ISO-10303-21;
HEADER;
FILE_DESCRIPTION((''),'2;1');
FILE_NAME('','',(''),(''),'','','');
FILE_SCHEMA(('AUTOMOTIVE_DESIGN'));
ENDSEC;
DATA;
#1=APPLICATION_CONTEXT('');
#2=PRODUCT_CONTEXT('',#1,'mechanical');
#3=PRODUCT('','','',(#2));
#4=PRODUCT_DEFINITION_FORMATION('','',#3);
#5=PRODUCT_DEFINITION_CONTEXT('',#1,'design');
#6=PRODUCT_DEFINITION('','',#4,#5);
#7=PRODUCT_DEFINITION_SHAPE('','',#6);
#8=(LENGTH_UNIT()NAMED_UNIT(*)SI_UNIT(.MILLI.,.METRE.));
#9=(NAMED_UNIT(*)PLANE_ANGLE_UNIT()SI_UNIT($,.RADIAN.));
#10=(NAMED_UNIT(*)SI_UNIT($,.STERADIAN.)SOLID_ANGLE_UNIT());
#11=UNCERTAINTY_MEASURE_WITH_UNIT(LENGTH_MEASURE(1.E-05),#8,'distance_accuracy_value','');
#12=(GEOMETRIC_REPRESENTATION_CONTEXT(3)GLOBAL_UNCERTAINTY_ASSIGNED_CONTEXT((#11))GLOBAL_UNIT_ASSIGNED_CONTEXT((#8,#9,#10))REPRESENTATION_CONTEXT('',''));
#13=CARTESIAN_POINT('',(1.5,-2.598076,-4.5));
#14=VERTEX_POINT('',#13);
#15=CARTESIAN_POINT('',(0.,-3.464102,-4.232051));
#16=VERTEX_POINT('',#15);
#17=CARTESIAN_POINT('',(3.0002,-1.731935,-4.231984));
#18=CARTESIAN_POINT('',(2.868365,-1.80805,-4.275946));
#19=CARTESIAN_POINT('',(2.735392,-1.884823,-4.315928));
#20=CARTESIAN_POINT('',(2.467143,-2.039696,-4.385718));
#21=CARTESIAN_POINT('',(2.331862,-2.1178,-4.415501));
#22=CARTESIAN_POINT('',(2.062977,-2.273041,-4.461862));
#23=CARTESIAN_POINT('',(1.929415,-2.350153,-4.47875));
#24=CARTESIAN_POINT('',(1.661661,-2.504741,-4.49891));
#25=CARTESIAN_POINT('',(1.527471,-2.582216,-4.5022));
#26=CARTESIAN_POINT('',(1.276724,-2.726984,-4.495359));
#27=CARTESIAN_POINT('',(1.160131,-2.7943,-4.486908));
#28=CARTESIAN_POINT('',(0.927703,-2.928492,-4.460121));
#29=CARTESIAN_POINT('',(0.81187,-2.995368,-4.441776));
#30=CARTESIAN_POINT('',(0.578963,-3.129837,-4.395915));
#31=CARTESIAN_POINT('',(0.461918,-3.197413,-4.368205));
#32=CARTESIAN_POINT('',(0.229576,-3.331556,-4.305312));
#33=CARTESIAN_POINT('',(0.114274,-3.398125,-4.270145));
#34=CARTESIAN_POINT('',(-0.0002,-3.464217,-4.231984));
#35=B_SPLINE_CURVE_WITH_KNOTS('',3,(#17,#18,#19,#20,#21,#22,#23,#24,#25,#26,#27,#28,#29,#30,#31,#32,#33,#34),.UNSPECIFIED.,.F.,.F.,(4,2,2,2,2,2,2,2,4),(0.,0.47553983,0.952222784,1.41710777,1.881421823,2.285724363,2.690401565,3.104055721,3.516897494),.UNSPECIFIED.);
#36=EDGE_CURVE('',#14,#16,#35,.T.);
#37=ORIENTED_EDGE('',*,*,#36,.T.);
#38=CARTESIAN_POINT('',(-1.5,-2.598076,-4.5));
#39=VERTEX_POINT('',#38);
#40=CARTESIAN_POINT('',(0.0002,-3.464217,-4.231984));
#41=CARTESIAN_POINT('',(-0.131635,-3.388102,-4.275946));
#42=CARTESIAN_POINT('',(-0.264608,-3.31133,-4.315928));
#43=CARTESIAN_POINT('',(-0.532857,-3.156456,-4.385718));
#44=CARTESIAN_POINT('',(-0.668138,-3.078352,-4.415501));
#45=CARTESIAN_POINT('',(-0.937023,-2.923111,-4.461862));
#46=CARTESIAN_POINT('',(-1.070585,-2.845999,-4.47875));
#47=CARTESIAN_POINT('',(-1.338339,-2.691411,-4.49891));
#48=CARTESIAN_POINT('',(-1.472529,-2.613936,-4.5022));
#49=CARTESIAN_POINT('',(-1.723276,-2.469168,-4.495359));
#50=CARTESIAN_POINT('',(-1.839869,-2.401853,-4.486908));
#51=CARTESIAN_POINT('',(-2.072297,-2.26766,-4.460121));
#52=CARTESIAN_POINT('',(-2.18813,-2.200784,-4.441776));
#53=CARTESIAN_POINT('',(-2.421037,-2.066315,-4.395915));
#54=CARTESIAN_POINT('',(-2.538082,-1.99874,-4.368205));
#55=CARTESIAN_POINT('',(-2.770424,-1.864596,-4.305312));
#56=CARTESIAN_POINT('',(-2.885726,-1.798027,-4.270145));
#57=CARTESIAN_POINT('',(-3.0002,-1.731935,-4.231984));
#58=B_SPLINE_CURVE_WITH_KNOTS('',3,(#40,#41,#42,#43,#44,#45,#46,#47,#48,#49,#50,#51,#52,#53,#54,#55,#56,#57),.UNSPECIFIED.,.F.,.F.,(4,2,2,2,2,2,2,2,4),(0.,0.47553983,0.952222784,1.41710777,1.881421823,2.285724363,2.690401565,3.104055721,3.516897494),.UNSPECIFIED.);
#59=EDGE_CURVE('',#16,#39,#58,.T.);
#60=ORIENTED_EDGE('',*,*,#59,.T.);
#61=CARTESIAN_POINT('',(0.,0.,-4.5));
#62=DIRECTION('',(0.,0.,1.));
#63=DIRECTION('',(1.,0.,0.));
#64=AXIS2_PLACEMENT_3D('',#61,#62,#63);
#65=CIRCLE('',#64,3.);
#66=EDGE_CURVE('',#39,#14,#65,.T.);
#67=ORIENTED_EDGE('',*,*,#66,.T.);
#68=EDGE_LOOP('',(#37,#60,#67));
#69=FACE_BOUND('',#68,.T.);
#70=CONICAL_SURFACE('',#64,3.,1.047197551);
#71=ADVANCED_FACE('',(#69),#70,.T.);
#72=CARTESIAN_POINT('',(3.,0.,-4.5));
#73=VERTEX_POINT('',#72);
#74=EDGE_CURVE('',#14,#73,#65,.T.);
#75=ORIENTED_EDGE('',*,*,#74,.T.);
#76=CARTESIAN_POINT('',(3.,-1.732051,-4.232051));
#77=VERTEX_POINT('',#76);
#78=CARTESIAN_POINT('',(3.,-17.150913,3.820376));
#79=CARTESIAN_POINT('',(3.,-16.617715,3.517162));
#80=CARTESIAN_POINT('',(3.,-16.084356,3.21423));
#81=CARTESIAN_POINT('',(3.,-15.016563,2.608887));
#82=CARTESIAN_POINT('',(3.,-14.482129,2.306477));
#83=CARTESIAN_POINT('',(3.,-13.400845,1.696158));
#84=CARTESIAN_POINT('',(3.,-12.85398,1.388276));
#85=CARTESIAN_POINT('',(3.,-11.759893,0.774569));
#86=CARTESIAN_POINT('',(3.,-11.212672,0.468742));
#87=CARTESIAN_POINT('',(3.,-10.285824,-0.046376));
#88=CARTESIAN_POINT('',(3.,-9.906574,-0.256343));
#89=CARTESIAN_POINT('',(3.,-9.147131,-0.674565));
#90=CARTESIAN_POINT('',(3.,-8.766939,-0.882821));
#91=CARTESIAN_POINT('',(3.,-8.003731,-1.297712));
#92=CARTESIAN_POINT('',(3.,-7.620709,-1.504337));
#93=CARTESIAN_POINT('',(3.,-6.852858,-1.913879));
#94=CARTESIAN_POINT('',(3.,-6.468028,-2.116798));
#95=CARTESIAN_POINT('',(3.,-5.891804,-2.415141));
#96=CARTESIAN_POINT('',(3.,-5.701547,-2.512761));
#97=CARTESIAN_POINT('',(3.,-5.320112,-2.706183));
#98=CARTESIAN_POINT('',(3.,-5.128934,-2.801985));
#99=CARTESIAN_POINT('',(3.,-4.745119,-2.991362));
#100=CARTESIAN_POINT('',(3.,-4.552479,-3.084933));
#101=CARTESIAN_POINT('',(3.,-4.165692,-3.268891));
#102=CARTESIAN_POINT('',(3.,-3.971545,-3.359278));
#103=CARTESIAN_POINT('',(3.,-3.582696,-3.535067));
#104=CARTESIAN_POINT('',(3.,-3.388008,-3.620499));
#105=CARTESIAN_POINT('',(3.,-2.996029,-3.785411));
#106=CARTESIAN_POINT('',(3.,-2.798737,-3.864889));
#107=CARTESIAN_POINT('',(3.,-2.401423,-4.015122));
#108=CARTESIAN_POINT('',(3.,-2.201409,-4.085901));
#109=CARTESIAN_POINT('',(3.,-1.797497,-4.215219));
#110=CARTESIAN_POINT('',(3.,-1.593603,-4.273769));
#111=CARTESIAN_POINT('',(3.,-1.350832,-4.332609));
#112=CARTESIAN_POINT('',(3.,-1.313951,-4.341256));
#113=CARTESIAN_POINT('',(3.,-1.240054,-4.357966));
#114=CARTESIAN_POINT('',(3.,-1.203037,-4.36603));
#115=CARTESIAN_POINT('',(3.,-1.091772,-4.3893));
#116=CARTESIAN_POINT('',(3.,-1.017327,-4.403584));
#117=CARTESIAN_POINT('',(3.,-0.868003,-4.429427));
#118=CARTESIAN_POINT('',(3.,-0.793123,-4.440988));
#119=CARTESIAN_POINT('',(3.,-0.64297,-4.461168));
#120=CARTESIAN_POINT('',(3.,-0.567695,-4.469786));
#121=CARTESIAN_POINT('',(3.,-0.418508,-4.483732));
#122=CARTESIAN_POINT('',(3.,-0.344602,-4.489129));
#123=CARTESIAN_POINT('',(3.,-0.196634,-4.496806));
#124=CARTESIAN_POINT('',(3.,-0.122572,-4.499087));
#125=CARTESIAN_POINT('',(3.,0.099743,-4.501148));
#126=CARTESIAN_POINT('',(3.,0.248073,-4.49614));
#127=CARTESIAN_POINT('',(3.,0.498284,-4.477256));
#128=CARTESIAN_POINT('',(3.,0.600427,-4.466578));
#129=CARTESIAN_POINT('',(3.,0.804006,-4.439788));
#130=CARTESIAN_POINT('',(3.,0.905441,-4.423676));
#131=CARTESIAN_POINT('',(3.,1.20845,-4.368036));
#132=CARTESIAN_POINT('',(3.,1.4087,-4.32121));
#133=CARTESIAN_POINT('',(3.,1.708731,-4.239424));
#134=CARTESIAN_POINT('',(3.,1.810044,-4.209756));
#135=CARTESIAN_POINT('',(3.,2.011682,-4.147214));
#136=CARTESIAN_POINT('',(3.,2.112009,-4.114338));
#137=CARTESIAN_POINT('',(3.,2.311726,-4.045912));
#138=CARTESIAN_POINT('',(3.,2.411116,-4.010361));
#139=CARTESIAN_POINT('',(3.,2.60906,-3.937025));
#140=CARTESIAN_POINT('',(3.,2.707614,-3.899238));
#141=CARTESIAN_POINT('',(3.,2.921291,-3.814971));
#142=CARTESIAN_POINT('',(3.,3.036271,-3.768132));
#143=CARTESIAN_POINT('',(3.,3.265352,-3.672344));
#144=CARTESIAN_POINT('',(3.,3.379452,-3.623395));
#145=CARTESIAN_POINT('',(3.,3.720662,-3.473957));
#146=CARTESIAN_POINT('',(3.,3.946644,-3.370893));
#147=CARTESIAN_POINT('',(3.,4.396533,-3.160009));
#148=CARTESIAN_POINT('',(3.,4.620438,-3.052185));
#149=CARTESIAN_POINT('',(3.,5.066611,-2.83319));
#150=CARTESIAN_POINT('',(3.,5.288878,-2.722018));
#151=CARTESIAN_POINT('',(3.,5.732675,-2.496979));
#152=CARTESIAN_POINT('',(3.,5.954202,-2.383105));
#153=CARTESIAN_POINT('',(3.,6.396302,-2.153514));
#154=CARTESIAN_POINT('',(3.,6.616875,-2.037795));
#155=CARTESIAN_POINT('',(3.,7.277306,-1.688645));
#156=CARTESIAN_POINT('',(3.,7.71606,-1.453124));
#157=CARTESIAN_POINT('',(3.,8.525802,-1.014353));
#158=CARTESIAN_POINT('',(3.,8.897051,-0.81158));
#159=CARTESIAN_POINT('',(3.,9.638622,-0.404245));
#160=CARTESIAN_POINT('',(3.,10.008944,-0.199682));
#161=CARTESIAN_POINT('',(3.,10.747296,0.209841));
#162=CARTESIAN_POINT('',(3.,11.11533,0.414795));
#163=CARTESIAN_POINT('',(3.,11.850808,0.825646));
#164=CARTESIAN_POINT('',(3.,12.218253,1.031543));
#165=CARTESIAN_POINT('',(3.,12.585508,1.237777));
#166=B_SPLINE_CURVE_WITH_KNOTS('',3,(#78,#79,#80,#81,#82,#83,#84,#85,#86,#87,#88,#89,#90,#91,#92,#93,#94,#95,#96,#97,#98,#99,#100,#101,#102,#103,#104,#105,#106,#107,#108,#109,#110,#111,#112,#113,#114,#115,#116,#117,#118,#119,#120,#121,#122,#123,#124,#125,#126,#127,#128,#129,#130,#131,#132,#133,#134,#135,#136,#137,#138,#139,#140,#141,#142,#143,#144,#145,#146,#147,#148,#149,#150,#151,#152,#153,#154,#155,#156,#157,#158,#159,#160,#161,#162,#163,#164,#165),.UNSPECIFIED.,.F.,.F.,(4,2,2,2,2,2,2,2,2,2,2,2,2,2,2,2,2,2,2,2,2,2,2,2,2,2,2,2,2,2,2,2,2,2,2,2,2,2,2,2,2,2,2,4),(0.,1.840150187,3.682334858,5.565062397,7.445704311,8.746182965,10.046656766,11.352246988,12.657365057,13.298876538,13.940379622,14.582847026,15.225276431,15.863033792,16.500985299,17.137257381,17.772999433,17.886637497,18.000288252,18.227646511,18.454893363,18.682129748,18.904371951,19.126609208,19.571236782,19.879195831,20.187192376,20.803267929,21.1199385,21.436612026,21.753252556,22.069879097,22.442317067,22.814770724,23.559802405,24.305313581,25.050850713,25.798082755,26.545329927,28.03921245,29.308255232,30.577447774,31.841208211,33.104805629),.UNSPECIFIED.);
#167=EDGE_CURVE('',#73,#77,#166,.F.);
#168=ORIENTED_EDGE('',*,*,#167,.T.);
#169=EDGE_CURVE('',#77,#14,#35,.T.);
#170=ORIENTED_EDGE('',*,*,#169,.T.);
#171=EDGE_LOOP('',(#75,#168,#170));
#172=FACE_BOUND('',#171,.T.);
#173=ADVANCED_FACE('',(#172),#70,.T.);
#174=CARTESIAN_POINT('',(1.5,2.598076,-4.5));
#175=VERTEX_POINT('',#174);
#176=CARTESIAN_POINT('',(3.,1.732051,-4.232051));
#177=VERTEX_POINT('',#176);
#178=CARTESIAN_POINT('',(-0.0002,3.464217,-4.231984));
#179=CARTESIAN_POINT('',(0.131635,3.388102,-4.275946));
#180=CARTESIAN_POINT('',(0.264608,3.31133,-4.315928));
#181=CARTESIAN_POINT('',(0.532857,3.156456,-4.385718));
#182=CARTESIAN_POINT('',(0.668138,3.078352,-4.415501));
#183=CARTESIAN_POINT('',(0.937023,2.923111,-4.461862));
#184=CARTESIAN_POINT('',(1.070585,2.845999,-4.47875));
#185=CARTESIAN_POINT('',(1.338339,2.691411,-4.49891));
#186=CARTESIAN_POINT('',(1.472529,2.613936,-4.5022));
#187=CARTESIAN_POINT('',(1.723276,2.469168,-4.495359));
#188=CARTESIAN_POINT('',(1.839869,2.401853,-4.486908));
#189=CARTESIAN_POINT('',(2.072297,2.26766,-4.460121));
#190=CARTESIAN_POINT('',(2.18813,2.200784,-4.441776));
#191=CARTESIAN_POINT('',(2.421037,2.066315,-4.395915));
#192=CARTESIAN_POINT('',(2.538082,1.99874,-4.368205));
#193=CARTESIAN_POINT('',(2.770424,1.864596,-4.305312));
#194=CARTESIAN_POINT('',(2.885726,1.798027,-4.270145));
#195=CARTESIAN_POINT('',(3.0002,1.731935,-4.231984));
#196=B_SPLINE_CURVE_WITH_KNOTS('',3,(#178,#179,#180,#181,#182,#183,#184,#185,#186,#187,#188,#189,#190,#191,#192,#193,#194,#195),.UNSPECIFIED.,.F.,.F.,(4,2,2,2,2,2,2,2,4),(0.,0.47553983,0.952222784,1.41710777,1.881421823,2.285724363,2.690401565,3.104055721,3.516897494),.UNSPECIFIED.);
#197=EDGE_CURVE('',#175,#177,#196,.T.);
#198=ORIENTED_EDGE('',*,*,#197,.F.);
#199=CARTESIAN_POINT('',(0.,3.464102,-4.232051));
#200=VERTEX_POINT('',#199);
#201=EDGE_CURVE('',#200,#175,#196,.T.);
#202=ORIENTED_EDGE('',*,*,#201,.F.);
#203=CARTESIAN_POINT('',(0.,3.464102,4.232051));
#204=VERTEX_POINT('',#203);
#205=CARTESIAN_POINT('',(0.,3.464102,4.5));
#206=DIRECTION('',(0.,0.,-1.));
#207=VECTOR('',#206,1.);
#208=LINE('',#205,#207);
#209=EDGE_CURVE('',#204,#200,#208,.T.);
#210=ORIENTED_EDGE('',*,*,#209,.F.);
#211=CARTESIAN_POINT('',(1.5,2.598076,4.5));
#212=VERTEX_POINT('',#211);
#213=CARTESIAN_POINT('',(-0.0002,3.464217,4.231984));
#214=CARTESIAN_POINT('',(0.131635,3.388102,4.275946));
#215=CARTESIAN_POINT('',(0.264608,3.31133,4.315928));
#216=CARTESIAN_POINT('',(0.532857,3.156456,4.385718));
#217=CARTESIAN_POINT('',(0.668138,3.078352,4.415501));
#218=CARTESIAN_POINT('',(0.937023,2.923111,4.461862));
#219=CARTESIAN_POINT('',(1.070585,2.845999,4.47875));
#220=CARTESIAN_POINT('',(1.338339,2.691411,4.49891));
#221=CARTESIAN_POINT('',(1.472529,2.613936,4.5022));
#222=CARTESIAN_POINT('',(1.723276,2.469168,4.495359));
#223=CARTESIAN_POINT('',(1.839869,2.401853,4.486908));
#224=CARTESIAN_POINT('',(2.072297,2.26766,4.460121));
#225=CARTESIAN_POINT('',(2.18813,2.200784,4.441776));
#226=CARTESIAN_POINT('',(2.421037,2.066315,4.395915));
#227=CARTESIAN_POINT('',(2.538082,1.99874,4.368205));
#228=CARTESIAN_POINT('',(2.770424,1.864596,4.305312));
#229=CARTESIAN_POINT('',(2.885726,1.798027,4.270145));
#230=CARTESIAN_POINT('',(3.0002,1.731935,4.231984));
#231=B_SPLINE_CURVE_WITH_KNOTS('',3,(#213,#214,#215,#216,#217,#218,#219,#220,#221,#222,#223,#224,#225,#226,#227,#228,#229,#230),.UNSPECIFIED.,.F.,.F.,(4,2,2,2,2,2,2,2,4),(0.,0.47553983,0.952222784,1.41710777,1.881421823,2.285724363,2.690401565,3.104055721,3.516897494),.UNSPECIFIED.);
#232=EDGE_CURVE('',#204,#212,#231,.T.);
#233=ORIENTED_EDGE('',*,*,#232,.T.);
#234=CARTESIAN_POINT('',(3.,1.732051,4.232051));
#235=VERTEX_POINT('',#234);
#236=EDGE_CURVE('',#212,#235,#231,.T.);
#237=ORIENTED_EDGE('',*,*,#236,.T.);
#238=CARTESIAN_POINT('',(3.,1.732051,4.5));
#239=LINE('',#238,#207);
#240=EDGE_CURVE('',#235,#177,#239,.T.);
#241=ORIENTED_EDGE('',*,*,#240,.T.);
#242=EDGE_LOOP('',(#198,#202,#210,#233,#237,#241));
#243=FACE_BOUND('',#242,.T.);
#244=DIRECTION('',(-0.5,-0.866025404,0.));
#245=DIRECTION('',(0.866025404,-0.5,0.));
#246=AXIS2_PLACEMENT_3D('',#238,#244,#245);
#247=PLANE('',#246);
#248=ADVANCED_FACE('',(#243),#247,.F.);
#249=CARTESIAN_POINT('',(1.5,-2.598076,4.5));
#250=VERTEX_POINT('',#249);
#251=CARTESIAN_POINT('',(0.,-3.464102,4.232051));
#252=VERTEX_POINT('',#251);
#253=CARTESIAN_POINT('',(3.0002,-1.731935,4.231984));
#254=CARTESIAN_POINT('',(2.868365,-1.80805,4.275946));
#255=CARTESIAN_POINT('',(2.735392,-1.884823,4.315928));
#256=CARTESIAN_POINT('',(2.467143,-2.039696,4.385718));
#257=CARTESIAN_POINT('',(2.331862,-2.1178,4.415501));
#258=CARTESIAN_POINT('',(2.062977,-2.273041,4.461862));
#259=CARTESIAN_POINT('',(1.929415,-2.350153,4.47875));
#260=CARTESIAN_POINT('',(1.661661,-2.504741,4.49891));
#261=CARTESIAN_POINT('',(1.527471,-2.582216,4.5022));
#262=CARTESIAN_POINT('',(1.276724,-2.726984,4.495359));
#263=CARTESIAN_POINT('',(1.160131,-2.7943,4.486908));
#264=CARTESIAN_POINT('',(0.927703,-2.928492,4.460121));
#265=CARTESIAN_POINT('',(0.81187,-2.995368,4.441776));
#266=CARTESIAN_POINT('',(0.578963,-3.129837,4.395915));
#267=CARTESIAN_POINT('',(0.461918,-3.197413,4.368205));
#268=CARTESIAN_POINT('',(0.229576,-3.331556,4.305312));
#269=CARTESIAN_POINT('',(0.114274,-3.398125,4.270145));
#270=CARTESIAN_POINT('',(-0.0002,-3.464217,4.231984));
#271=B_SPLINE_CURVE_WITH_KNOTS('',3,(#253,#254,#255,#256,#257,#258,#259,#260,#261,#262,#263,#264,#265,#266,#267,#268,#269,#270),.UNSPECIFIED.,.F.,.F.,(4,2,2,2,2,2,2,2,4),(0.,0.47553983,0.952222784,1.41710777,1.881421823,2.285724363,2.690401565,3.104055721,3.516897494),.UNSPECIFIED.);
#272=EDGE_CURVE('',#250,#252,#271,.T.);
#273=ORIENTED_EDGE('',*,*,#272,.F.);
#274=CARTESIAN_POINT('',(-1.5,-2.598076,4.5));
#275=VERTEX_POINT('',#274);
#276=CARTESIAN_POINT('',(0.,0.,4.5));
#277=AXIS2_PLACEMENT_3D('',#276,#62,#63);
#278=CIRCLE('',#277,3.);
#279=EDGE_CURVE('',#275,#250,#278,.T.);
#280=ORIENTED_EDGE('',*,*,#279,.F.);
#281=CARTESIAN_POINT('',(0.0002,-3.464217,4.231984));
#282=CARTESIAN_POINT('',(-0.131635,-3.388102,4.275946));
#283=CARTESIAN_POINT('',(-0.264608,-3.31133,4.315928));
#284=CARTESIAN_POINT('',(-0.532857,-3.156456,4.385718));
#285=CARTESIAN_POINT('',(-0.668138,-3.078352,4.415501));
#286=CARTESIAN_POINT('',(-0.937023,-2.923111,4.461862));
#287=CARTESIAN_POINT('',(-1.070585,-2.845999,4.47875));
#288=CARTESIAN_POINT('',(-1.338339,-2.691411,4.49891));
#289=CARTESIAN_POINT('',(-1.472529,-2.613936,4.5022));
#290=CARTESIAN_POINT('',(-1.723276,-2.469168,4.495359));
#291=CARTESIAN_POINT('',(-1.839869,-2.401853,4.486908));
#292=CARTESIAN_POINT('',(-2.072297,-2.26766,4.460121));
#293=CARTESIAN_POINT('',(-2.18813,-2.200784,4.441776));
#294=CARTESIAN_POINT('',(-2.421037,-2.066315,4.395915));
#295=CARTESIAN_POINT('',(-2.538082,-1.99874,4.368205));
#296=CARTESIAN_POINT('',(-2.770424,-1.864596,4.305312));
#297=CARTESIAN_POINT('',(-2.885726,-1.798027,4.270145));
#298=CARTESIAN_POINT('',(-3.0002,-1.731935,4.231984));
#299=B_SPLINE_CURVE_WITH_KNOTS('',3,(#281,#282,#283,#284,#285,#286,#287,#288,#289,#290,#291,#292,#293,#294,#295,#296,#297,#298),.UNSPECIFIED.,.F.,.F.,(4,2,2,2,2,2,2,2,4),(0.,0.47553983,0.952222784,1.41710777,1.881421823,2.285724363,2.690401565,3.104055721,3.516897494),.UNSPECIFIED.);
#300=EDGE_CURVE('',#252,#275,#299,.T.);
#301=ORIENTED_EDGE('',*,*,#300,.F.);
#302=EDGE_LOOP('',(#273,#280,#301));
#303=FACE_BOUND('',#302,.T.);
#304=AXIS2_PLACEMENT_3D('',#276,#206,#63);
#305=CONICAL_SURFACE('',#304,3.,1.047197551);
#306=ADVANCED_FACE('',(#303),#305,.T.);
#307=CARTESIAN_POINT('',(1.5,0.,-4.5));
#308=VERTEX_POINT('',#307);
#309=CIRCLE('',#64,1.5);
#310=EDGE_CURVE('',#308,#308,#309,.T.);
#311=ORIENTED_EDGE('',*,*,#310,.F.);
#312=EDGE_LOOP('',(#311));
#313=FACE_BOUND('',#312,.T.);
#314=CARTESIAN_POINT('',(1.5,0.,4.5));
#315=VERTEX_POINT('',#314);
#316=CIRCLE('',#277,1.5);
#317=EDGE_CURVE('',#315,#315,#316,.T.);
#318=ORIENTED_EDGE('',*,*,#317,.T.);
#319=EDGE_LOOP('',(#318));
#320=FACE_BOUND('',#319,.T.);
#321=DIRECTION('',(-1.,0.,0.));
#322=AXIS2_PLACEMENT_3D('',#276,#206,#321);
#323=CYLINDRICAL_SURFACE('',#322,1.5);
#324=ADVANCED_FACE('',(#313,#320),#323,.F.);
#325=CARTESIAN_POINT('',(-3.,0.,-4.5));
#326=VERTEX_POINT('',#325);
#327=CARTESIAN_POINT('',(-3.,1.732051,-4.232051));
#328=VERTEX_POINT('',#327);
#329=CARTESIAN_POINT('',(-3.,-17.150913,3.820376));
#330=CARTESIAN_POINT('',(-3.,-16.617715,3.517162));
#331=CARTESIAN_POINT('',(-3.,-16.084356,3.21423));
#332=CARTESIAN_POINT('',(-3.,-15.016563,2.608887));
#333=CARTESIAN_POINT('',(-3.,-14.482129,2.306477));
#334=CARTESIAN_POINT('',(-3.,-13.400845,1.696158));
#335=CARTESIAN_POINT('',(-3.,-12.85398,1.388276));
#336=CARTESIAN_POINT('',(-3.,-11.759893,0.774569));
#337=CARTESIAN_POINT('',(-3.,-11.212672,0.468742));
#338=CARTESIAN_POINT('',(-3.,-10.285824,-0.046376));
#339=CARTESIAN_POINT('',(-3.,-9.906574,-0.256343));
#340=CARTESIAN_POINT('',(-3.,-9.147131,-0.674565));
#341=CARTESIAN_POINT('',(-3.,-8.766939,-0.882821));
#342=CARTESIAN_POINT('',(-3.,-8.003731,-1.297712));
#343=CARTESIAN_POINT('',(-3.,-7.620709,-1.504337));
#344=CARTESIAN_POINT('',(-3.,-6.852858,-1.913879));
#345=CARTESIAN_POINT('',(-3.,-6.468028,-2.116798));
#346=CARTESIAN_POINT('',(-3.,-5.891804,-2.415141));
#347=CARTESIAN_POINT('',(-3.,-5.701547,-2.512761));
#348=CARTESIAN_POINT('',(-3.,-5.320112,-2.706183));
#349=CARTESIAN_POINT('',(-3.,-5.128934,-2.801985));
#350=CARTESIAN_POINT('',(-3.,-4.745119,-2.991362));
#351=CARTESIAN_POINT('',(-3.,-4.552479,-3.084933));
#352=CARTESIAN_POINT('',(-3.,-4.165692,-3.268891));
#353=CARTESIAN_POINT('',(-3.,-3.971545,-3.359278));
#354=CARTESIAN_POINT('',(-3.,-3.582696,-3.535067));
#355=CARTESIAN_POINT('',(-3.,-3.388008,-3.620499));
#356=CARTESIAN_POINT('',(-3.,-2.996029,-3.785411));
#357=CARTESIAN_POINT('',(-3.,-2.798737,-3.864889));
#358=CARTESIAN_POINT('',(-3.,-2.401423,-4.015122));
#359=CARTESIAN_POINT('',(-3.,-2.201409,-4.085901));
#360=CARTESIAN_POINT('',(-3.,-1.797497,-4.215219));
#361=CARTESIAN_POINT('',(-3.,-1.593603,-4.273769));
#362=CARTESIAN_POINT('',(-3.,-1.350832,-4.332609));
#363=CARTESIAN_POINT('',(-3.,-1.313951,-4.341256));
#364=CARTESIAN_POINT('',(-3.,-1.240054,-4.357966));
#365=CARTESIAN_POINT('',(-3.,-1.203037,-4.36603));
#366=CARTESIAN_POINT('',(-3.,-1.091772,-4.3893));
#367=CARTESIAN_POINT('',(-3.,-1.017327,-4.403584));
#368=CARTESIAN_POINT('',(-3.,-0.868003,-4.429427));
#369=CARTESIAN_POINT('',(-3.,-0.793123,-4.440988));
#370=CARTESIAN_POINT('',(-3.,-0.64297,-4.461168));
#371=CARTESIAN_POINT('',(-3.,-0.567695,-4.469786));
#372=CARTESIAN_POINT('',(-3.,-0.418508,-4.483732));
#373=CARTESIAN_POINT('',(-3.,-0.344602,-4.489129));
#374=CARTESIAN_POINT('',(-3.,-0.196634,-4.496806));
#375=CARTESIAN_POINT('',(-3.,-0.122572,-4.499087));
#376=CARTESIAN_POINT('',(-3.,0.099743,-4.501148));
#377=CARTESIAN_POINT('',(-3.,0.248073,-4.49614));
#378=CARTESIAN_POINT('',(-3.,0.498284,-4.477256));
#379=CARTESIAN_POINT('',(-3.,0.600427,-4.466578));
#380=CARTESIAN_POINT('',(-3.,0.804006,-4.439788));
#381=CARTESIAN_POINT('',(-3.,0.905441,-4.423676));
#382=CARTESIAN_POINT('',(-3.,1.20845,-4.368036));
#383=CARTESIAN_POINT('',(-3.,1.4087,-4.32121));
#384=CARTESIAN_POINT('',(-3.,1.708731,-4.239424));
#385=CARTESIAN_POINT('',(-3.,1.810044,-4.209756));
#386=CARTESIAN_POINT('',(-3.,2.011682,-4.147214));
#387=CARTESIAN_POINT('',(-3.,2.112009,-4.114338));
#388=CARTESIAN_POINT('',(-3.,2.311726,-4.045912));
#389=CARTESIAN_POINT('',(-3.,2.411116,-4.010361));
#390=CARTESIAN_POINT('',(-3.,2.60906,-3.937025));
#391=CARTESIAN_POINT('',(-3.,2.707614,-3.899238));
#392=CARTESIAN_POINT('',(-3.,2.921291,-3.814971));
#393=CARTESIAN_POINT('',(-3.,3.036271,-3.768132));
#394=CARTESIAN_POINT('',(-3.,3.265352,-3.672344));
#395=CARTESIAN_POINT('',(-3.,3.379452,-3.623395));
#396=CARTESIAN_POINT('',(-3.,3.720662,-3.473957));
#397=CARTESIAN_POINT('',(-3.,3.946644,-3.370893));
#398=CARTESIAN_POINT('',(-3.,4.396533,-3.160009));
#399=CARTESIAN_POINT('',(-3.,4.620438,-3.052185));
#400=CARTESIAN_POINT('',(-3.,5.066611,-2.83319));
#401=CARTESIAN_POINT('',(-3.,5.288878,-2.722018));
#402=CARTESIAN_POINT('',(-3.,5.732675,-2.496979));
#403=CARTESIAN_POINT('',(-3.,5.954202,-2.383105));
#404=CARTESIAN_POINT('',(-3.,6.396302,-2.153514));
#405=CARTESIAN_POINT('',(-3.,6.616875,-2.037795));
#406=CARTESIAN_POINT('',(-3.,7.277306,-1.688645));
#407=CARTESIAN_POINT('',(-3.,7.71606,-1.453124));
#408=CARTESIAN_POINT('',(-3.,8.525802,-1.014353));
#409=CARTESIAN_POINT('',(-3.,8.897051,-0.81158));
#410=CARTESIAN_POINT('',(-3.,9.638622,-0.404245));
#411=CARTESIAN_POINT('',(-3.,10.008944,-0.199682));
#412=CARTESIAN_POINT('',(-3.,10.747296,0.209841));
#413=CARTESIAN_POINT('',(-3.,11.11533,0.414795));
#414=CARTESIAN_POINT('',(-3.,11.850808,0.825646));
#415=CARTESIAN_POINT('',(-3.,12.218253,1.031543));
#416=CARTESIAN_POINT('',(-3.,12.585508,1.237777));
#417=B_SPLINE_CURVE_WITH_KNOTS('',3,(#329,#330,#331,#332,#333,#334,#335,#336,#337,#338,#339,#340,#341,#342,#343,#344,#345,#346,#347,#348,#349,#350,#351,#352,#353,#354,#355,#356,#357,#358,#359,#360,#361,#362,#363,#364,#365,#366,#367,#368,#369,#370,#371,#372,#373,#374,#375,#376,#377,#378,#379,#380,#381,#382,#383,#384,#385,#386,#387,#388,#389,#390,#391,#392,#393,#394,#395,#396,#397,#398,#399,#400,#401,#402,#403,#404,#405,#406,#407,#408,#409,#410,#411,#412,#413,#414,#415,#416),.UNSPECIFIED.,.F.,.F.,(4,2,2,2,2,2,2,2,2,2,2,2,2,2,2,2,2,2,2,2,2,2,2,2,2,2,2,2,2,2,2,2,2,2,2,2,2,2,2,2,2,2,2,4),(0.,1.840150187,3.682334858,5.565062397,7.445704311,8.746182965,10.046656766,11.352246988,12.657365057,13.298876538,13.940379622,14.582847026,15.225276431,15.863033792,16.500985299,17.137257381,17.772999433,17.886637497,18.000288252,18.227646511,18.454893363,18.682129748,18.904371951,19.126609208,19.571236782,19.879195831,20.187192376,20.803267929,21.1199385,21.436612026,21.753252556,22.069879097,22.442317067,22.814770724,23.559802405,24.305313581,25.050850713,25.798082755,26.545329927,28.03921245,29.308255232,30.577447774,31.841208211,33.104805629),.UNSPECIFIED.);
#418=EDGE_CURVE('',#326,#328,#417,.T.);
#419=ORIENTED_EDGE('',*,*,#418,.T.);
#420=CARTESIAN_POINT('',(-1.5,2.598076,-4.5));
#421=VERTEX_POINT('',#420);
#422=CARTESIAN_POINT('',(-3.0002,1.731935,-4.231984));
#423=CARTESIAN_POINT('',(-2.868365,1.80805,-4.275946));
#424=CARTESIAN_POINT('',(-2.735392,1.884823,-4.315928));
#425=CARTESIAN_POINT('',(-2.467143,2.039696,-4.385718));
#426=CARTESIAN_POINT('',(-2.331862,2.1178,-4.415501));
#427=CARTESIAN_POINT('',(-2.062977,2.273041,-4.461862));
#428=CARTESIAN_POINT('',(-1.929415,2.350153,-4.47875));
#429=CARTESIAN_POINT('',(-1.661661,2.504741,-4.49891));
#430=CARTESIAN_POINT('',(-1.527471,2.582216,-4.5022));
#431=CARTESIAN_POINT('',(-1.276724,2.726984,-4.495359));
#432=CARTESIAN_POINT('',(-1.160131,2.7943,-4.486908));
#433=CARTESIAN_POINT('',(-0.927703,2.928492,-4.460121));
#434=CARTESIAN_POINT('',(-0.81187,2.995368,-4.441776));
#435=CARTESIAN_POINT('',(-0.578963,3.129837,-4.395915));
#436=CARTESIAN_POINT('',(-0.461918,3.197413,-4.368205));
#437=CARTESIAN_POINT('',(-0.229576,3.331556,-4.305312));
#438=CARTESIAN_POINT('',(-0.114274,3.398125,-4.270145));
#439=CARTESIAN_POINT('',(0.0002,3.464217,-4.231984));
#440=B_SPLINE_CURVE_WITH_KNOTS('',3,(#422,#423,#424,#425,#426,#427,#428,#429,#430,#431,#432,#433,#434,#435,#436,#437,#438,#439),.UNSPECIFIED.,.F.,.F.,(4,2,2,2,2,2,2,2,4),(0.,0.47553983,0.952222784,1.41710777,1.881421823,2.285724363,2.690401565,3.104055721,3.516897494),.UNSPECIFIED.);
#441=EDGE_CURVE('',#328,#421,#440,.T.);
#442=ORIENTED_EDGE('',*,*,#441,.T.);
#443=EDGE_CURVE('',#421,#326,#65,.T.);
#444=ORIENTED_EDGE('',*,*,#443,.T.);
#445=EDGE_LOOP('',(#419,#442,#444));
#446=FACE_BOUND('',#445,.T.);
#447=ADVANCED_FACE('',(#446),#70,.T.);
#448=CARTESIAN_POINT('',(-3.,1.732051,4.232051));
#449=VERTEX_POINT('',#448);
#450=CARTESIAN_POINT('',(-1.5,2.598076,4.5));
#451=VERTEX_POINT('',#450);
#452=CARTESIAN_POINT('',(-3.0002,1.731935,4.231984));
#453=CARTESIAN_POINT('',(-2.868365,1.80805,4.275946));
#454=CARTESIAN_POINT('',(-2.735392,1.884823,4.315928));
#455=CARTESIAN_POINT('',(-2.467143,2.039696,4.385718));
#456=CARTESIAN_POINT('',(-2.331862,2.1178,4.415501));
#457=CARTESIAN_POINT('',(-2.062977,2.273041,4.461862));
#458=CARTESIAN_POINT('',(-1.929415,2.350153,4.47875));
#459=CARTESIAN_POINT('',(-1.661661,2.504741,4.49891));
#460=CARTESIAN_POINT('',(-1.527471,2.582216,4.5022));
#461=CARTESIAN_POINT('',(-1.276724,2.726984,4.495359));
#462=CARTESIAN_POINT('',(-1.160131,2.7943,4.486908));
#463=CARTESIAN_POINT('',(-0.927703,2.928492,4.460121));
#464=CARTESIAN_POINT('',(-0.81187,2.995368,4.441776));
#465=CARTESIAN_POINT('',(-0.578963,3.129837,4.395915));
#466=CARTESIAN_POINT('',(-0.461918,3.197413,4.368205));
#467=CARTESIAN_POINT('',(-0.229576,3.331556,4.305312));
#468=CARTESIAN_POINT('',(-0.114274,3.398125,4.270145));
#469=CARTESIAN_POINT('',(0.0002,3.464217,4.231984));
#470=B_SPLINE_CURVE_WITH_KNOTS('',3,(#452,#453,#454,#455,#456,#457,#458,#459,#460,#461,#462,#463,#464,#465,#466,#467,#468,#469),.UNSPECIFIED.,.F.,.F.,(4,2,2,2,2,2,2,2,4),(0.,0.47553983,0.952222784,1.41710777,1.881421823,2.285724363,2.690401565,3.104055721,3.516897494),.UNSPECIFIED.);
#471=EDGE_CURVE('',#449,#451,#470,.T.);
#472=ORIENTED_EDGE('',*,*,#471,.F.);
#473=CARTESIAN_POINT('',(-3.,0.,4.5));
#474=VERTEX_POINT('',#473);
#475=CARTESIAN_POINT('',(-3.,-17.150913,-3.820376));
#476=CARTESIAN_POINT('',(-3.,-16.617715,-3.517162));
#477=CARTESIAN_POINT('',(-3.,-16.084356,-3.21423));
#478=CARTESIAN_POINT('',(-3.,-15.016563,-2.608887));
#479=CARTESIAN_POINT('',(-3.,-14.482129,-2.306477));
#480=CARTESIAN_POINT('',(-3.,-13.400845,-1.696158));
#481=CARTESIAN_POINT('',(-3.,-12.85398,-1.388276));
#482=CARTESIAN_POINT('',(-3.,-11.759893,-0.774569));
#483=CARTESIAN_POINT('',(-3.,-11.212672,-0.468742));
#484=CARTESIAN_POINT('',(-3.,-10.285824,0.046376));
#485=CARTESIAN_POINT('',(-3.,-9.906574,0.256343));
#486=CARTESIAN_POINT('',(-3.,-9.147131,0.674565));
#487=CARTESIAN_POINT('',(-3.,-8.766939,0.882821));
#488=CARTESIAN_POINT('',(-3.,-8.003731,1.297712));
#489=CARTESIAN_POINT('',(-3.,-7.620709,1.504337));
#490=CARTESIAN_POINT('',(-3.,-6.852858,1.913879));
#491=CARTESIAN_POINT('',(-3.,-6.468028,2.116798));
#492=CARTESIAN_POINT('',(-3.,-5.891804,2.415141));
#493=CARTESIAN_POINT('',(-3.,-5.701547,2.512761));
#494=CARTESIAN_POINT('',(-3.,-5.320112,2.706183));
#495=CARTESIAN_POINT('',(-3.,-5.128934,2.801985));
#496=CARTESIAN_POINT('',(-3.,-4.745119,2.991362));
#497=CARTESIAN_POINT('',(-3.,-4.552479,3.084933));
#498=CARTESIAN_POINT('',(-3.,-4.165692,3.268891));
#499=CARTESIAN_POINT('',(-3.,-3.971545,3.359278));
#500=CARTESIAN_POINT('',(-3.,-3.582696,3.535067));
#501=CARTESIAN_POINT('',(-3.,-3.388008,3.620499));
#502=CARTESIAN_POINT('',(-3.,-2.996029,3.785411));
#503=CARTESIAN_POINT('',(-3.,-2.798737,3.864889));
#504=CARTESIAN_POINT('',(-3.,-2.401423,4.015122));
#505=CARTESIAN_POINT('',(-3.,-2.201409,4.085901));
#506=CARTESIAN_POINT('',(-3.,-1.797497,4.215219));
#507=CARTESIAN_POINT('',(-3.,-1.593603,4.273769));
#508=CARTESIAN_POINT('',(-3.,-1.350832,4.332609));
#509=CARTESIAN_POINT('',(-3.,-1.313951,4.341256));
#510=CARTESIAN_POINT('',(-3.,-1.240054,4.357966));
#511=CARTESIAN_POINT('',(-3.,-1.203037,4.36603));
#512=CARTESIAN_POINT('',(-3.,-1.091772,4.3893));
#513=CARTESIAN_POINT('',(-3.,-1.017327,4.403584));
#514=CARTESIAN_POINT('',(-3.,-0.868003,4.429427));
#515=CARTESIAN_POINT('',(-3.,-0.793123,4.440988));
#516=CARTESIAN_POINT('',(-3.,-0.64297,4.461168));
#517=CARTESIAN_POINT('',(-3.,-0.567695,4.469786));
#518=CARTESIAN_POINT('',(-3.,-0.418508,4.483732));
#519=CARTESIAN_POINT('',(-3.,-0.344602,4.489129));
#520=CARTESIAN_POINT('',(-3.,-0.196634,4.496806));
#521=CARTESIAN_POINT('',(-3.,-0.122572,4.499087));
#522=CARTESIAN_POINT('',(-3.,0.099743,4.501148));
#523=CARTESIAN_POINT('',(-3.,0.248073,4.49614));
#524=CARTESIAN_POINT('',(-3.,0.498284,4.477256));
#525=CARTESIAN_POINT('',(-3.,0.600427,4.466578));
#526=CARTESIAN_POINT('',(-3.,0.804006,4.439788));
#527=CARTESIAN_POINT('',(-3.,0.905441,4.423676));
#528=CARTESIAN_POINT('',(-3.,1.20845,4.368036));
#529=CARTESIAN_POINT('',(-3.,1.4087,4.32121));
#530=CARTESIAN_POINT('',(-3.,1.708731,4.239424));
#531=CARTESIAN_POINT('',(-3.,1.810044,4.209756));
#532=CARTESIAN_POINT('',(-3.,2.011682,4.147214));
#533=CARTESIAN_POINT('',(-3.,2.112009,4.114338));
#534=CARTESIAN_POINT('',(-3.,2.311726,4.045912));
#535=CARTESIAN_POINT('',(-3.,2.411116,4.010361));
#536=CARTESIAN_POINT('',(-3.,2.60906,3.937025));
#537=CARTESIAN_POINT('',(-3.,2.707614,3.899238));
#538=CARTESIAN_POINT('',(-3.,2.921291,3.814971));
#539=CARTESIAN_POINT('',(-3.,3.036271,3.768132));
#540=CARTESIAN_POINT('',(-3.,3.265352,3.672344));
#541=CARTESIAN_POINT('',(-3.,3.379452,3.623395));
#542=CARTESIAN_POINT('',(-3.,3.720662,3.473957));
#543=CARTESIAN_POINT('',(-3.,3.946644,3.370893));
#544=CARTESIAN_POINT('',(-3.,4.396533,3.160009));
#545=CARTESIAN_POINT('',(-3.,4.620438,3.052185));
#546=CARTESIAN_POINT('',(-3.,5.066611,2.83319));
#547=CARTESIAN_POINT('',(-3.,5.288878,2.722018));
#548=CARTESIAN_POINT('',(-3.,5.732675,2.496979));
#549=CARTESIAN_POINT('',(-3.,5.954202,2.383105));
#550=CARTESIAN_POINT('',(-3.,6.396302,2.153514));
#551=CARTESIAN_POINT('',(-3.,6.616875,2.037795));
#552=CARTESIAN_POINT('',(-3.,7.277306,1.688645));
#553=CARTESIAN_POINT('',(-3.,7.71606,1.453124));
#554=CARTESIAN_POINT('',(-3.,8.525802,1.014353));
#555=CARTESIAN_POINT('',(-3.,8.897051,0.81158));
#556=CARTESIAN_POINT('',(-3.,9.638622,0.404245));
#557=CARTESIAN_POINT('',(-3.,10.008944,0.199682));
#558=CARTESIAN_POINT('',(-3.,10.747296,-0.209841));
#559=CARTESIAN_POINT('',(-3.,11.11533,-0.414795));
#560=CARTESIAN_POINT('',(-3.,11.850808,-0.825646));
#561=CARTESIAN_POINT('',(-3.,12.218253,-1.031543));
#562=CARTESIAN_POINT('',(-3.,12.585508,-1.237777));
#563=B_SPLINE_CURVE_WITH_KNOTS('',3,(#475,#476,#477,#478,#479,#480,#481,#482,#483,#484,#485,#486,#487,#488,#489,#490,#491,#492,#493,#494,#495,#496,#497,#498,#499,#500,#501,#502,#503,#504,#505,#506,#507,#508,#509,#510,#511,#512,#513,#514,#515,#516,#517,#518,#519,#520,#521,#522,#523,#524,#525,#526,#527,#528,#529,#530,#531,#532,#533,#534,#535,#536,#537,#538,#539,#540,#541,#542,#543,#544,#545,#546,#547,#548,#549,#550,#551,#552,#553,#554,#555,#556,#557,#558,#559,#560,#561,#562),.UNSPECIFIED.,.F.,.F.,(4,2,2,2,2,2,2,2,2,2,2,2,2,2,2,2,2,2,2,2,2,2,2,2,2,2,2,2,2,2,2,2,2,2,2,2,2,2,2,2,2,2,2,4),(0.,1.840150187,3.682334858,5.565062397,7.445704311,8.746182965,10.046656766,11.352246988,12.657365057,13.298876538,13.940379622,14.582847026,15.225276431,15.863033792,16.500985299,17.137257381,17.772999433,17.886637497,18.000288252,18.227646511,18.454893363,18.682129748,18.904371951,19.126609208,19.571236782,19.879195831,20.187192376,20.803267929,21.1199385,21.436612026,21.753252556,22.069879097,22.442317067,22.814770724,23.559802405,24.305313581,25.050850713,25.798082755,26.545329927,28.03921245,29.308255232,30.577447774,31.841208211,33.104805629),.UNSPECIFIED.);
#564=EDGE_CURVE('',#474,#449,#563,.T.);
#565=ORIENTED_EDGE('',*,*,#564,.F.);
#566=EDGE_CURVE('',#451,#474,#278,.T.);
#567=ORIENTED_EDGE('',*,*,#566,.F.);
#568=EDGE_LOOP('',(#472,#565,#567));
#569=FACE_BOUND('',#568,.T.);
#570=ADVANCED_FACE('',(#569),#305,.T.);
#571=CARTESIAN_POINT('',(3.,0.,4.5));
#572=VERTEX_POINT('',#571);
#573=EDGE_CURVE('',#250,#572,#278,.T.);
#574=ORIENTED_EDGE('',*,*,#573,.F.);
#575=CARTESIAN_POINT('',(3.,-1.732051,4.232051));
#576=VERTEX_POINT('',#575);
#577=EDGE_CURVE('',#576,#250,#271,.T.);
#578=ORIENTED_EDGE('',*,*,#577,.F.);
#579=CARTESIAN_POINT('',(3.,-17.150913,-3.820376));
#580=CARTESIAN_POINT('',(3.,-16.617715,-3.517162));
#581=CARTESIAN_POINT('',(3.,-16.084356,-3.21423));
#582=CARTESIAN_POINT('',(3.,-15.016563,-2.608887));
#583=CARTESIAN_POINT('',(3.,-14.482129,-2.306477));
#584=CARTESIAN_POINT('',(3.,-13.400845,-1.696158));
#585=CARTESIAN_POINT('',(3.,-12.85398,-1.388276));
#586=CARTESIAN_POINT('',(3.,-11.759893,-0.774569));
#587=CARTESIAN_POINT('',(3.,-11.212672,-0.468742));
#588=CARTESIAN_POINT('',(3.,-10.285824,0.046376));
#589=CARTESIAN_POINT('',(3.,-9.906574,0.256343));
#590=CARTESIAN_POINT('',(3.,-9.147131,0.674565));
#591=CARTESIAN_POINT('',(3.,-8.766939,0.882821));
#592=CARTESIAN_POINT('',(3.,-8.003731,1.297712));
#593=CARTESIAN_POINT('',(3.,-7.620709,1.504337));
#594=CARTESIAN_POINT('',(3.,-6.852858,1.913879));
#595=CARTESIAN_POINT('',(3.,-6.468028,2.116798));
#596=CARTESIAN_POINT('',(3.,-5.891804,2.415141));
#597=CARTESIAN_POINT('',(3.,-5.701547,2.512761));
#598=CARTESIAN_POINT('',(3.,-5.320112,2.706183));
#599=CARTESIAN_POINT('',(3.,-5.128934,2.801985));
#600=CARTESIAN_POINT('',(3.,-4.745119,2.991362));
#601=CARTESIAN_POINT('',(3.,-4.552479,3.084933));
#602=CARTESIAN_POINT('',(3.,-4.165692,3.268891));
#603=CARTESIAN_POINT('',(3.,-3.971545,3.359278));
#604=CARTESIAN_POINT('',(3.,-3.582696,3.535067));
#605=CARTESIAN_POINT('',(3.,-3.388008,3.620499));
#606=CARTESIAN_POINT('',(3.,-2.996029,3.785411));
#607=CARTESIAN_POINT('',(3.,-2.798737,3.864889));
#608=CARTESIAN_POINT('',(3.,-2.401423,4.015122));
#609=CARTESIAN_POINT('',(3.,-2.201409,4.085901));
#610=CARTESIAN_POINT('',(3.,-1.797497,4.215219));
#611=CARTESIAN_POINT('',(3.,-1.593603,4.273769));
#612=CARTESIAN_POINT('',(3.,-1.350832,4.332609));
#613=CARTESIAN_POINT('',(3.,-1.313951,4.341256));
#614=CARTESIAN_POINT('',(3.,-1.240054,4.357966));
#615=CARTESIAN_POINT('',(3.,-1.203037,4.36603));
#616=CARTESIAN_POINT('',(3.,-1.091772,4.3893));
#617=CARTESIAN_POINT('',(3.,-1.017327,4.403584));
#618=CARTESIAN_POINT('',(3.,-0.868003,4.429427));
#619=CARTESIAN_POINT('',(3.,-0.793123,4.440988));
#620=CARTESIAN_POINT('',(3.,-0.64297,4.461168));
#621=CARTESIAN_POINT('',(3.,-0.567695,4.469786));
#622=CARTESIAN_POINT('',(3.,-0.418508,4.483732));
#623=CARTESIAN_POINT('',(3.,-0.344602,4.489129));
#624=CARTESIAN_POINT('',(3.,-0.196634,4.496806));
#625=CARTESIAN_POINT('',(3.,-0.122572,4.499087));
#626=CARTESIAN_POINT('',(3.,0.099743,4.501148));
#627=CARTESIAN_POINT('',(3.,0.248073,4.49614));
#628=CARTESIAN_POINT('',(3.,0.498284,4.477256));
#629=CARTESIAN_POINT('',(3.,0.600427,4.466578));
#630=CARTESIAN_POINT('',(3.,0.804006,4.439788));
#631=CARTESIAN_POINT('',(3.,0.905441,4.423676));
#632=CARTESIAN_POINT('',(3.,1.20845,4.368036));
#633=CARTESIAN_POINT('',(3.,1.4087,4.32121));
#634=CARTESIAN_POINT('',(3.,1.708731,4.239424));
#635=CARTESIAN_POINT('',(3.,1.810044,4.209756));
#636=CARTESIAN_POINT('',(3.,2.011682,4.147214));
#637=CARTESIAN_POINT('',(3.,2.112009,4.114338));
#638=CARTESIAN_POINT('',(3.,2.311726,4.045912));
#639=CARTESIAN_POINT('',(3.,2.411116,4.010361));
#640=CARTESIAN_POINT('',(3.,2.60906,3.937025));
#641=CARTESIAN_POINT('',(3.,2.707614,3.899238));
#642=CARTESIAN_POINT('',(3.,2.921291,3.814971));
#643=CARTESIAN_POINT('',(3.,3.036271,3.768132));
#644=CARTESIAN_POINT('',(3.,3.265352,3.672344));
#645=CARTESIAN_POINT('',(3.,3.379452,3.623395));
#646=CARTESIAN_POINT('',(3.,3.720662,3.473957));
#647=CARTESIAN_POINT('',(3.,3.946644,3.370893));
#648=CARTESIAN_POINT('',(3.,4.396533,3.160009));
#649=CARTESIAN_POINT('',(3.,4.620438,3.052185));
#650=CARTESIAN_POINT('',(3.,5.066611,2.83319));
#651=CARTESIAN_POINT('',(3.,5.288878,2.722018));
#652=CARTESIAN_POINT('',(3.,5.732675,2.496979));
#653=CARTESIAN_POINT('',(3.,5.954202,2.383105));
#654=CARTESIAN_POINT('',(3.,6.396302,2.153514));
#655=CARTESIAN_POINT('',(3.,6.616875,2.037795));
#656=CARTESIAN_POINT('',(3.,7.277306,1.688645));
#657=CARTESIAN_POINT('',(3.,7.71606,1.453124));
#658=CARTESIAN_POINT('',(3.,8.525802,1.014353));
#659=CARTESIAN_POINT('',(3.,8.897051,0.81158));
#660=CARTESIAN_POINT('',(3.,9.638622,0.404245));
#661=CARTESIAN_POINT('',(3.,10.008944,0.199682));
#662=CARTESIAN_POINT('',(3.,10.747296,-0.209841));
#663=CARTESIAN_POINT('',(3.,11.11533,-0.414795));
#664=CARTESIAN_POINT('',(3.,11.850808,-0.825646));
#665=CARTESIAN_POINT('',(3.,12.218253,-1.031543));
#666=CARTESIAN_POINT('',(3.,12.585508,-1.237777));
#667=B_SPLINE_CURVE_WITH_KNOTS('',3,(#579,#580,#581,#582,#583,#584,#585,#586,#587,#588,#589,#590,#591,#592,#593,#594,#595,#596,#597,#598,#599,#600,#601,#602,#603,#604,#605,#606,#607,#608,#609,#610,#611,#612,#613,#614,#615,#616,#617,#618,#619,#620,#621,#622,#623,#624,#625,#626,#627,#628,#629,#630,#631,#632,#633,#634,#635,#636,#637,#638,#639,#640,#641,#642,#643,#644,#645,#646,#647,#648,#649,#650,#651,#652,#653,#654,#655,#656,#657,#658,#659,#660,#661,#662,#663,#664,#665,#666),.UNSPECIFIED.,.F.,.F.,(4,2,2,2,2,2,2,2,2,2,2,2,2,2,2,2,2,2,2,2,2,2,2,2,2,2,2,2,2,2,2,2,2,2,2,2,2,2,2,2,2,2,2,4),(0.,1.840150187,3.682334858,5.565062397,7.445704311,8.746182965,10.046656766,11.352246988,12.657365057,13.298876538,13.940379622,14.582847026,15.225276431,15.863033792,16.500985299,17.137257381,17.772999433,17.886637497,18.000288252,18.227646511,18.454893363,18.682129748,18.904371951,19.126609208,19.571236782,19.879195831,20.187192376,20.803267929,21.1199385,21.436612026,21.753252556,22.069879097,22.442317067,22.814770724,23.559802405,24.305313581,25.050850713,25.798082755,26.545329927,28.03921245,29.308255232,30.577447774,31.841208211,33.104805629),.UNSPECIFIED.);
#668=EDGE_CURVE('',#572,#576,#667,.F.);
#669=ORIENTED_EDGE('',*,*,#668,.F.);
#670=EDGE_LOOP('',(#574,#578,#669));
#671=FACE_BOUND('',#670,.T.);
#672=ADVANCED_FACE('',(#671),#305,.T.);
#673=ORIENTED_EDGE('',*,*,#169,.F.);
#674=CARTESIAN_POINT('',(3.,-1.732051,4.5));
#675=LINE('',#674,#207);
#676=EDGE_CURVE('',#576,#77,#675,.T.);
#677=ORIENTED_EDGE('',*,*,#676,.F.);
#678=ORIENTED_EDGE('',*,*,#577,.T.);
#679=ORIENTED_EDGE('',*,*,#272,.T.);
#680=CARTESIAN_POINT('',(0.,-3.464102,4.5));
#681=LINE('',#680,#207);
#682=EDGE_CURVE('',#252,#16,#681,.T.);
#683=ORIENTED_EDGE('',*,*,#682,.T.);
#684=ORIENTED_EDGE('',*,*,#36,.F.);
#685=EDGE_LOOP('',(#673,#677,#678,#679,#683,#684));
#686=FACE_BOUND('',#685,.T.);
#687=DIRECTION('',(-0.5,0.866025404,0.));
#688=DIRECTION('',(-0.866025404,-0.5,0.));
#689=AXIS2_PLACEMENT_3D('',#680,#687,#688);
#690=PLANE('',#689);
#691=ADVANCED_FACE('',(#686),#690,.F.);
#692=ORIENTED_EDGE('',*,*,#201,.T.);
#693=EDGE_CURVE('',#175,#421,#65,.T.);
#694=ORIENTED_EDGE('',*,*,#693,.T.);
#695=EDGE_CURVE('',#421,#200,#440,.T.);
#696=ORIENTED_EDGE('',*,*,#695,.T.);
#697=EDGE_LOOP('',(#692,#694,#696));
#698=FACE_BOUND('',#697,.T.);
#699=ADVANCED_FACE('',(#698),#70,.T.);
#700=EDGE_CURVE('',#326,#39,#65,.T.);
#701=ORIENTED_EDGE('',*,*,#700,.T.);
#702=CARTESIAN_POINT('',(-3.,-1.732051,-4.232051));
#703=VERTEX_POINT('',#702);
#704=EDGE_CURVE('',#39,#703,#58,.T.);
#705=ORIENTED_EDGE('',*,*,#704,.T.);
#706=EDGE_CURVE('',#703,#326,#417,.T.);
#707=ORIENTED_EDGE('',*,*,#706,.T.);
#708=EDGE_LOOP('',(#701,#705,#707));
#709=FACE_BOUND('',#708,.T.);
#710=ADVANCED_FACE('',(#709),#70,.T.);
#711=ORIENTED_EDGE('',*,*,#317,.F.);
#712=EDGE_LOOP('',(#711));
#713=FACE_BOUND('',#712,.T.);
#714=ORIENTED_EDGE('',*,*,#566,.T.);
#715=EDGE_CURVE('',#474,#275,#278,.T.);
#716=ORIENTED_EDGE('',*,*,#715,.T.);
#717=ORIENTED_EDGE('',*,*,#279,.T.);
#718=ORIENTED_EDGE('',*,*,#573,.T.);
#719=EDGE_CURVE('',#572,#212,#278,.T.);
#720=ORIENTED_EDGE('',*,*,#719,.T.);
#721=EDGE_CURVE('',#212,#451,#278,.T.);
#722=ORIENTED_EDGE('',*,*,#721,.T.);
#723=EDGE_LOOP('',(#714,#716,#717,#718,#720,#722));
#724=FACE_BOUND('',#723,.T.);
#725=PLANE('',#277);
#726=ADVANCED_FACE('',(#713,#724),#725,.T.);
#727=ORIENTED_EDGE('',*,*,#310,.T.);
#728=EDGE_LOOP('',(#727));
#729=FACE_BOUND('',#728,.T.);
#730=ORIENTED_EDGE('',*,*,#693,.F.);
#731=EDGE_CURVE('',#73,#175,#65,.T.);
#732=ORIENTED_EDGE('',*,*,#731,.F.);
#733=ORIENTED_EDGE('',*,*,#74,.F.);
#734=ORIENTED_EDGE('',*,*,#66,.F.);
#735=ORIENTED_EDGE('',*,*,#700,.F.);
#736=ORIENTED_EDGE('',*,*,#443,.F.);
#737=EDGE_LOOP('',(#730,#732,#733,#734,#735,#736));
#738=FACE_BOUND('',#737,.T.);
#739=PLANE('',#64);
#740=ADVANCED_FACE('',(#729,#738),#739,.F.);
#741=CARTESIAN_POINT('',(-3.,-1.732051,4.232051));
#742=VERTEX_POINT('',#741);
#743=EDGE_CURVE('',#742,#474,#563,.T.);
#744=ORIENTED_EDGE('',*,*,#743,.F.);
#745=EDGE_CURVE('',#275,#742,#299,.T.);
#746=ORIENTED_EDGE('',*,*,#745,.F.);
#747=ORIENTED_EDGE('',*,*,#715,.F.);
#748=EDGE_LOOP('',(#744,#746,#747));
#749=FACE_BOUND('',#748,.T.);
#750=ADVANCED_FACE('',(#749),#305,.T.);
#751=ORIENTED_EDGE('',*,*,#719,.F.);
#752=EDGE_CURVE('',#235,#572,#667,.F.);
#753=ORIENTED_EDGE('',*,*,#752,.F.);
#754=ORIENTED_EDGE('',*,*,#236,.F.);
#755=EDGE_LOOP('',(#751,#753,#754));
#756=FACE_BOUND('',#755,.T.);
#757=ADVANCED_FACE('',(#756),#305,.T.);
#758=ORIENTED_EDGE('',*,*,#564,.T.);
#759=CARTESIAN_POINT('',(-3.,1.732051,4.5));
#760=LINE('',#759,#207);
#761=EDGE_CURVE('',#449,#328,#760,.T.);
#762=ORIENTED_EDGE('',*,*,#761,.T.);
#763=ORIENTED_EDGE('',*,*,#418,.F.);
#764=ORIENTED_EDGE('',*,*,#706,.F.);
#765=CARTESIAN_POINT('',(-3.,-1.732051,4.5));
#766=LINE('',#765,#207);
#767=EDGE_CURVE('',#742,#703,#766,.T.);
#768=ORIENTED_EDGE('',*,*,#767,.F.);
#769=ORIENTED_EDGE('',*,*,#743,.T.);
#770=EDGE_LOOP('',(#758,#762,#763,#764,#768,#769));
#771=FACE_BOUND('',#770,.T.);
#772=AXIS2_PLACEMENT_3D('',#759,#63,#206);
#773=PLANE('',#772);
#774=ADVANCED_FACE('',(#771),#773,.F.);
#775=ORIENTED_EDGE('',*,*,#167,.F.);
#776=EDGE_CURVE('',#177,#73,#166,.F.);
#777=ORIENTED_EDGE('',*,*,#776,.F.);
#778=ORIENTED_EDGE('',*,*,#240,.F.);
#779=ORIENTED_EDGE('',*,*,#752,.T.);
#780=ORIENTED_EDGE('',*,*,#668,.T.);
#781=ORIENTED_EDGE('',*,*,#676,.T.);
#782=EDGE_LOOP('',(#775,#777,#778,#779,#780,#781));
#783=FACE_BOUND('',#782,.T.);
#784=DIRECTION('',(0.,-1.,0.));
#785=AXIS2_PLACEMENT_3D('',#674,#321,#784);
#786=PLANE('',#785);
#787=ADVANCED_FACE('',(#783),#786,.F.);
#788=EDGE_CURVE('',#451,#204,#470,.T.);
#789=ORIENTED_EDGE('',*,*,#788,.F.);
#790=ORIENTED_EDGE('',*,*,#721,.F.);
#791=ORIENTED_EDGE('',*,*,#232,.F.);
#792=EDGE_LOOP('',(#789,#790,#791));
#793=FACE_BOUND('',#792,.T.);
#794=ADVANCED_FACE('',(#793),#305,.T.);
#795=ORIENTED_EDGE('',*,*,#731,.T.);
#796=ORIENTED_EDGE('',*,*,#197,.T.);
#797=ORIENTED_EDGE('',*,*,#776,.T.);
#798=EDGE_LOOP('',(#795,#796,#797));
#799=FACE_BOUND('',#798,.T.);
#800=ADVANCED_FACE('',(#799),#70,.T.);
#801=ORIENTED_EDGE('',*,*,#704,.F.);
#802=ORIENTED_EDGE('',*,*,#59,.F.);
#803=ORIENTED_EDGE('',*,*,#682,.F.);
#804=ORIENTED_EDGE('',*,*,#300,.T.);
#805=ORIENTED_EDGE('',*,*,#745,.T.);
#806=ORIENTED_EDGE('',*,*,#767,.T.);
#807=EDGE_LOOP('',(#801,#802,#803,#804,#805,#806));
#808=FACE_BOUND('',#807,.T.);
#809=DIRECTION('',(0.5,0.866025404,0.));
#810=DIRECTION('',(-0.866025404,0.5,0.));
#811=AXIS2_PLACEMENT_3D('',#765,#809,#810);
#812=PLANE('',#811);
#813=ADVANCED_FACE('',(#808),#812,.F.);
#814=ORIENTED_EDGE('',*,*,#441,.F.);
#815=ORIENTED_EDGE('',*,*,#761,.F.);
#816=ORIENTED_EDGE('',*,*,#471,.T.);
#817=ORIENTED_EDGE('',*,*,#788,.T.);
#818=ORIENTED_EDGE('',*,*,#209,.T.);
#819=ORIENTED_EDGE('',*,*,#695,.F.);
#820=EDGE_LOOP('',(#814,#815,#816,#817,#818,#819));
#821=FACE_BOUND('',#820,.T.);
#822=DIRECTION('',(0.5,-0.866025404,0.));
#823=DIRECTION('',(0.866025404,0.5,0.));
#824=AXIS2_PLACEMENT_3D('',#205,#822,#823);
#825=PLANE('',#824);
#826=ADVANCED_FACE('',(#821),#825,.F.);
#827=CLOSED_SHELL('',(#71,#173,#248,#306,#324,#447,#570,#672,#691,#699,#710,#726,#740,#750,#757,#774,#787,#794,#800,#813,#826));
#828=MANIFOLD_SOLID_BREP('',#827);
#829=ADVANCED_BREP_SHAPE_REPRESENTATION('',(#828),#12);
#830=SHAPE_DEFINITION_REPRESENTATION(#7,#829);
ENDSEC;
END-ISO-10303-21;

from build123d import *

# Parameters (mm, degrees)
BOSS_EXTRUDE1_DEPTH      = 4.5
BOSS_EXTRUDE1_DEPTH_BACK = 4.5
SKETCH3_R                = 1.5


# Read off the part's stored shape, not the designer's step: Cut-Extrude1
with BuildPart() as part:
    # Sketch3 → Boss-Extrude1 (new, two sides: drawn at the far end of the back side and taken through both)
    with BuildSketch(Plane.XY.offset(-BOSS_EXTRUDE1_DEPTH_BACK)):
        Polygon((0, 3.464101615), (-3, 1.732050808), (-3, -1.732050808), (0, -3.464101615), (3, -1.732050808), (3, 1.732050808), align=None)
        Circle(SKETCH3_R, mode=Mode.SUBTRACT)
    extrude(amount=BOSS_EXTRUDE1_DEPTH + BOSS_EXTRUDE1_DEPTH_BACK)

    # Cut-Extrude1 outline → Cut-Extrude1 (revolve, cut)
    with BuildSketch(Plane.XZ):
        Polygon((3.464101616, 4.5), (3, 4.5), (3.464101609, 4.232050811), align=None)
    cut_extrude1 = revolve(axis=Axis((0, 0, 0), (0, 0, 1)), mode=Mode.SUBTRACT)

    # Mirror1: Cut-Extrude1 across plane
    add(cut_extrude1.mirror(Plane.XY), mode=Mode.SUBTRACT)


solid = part.part
